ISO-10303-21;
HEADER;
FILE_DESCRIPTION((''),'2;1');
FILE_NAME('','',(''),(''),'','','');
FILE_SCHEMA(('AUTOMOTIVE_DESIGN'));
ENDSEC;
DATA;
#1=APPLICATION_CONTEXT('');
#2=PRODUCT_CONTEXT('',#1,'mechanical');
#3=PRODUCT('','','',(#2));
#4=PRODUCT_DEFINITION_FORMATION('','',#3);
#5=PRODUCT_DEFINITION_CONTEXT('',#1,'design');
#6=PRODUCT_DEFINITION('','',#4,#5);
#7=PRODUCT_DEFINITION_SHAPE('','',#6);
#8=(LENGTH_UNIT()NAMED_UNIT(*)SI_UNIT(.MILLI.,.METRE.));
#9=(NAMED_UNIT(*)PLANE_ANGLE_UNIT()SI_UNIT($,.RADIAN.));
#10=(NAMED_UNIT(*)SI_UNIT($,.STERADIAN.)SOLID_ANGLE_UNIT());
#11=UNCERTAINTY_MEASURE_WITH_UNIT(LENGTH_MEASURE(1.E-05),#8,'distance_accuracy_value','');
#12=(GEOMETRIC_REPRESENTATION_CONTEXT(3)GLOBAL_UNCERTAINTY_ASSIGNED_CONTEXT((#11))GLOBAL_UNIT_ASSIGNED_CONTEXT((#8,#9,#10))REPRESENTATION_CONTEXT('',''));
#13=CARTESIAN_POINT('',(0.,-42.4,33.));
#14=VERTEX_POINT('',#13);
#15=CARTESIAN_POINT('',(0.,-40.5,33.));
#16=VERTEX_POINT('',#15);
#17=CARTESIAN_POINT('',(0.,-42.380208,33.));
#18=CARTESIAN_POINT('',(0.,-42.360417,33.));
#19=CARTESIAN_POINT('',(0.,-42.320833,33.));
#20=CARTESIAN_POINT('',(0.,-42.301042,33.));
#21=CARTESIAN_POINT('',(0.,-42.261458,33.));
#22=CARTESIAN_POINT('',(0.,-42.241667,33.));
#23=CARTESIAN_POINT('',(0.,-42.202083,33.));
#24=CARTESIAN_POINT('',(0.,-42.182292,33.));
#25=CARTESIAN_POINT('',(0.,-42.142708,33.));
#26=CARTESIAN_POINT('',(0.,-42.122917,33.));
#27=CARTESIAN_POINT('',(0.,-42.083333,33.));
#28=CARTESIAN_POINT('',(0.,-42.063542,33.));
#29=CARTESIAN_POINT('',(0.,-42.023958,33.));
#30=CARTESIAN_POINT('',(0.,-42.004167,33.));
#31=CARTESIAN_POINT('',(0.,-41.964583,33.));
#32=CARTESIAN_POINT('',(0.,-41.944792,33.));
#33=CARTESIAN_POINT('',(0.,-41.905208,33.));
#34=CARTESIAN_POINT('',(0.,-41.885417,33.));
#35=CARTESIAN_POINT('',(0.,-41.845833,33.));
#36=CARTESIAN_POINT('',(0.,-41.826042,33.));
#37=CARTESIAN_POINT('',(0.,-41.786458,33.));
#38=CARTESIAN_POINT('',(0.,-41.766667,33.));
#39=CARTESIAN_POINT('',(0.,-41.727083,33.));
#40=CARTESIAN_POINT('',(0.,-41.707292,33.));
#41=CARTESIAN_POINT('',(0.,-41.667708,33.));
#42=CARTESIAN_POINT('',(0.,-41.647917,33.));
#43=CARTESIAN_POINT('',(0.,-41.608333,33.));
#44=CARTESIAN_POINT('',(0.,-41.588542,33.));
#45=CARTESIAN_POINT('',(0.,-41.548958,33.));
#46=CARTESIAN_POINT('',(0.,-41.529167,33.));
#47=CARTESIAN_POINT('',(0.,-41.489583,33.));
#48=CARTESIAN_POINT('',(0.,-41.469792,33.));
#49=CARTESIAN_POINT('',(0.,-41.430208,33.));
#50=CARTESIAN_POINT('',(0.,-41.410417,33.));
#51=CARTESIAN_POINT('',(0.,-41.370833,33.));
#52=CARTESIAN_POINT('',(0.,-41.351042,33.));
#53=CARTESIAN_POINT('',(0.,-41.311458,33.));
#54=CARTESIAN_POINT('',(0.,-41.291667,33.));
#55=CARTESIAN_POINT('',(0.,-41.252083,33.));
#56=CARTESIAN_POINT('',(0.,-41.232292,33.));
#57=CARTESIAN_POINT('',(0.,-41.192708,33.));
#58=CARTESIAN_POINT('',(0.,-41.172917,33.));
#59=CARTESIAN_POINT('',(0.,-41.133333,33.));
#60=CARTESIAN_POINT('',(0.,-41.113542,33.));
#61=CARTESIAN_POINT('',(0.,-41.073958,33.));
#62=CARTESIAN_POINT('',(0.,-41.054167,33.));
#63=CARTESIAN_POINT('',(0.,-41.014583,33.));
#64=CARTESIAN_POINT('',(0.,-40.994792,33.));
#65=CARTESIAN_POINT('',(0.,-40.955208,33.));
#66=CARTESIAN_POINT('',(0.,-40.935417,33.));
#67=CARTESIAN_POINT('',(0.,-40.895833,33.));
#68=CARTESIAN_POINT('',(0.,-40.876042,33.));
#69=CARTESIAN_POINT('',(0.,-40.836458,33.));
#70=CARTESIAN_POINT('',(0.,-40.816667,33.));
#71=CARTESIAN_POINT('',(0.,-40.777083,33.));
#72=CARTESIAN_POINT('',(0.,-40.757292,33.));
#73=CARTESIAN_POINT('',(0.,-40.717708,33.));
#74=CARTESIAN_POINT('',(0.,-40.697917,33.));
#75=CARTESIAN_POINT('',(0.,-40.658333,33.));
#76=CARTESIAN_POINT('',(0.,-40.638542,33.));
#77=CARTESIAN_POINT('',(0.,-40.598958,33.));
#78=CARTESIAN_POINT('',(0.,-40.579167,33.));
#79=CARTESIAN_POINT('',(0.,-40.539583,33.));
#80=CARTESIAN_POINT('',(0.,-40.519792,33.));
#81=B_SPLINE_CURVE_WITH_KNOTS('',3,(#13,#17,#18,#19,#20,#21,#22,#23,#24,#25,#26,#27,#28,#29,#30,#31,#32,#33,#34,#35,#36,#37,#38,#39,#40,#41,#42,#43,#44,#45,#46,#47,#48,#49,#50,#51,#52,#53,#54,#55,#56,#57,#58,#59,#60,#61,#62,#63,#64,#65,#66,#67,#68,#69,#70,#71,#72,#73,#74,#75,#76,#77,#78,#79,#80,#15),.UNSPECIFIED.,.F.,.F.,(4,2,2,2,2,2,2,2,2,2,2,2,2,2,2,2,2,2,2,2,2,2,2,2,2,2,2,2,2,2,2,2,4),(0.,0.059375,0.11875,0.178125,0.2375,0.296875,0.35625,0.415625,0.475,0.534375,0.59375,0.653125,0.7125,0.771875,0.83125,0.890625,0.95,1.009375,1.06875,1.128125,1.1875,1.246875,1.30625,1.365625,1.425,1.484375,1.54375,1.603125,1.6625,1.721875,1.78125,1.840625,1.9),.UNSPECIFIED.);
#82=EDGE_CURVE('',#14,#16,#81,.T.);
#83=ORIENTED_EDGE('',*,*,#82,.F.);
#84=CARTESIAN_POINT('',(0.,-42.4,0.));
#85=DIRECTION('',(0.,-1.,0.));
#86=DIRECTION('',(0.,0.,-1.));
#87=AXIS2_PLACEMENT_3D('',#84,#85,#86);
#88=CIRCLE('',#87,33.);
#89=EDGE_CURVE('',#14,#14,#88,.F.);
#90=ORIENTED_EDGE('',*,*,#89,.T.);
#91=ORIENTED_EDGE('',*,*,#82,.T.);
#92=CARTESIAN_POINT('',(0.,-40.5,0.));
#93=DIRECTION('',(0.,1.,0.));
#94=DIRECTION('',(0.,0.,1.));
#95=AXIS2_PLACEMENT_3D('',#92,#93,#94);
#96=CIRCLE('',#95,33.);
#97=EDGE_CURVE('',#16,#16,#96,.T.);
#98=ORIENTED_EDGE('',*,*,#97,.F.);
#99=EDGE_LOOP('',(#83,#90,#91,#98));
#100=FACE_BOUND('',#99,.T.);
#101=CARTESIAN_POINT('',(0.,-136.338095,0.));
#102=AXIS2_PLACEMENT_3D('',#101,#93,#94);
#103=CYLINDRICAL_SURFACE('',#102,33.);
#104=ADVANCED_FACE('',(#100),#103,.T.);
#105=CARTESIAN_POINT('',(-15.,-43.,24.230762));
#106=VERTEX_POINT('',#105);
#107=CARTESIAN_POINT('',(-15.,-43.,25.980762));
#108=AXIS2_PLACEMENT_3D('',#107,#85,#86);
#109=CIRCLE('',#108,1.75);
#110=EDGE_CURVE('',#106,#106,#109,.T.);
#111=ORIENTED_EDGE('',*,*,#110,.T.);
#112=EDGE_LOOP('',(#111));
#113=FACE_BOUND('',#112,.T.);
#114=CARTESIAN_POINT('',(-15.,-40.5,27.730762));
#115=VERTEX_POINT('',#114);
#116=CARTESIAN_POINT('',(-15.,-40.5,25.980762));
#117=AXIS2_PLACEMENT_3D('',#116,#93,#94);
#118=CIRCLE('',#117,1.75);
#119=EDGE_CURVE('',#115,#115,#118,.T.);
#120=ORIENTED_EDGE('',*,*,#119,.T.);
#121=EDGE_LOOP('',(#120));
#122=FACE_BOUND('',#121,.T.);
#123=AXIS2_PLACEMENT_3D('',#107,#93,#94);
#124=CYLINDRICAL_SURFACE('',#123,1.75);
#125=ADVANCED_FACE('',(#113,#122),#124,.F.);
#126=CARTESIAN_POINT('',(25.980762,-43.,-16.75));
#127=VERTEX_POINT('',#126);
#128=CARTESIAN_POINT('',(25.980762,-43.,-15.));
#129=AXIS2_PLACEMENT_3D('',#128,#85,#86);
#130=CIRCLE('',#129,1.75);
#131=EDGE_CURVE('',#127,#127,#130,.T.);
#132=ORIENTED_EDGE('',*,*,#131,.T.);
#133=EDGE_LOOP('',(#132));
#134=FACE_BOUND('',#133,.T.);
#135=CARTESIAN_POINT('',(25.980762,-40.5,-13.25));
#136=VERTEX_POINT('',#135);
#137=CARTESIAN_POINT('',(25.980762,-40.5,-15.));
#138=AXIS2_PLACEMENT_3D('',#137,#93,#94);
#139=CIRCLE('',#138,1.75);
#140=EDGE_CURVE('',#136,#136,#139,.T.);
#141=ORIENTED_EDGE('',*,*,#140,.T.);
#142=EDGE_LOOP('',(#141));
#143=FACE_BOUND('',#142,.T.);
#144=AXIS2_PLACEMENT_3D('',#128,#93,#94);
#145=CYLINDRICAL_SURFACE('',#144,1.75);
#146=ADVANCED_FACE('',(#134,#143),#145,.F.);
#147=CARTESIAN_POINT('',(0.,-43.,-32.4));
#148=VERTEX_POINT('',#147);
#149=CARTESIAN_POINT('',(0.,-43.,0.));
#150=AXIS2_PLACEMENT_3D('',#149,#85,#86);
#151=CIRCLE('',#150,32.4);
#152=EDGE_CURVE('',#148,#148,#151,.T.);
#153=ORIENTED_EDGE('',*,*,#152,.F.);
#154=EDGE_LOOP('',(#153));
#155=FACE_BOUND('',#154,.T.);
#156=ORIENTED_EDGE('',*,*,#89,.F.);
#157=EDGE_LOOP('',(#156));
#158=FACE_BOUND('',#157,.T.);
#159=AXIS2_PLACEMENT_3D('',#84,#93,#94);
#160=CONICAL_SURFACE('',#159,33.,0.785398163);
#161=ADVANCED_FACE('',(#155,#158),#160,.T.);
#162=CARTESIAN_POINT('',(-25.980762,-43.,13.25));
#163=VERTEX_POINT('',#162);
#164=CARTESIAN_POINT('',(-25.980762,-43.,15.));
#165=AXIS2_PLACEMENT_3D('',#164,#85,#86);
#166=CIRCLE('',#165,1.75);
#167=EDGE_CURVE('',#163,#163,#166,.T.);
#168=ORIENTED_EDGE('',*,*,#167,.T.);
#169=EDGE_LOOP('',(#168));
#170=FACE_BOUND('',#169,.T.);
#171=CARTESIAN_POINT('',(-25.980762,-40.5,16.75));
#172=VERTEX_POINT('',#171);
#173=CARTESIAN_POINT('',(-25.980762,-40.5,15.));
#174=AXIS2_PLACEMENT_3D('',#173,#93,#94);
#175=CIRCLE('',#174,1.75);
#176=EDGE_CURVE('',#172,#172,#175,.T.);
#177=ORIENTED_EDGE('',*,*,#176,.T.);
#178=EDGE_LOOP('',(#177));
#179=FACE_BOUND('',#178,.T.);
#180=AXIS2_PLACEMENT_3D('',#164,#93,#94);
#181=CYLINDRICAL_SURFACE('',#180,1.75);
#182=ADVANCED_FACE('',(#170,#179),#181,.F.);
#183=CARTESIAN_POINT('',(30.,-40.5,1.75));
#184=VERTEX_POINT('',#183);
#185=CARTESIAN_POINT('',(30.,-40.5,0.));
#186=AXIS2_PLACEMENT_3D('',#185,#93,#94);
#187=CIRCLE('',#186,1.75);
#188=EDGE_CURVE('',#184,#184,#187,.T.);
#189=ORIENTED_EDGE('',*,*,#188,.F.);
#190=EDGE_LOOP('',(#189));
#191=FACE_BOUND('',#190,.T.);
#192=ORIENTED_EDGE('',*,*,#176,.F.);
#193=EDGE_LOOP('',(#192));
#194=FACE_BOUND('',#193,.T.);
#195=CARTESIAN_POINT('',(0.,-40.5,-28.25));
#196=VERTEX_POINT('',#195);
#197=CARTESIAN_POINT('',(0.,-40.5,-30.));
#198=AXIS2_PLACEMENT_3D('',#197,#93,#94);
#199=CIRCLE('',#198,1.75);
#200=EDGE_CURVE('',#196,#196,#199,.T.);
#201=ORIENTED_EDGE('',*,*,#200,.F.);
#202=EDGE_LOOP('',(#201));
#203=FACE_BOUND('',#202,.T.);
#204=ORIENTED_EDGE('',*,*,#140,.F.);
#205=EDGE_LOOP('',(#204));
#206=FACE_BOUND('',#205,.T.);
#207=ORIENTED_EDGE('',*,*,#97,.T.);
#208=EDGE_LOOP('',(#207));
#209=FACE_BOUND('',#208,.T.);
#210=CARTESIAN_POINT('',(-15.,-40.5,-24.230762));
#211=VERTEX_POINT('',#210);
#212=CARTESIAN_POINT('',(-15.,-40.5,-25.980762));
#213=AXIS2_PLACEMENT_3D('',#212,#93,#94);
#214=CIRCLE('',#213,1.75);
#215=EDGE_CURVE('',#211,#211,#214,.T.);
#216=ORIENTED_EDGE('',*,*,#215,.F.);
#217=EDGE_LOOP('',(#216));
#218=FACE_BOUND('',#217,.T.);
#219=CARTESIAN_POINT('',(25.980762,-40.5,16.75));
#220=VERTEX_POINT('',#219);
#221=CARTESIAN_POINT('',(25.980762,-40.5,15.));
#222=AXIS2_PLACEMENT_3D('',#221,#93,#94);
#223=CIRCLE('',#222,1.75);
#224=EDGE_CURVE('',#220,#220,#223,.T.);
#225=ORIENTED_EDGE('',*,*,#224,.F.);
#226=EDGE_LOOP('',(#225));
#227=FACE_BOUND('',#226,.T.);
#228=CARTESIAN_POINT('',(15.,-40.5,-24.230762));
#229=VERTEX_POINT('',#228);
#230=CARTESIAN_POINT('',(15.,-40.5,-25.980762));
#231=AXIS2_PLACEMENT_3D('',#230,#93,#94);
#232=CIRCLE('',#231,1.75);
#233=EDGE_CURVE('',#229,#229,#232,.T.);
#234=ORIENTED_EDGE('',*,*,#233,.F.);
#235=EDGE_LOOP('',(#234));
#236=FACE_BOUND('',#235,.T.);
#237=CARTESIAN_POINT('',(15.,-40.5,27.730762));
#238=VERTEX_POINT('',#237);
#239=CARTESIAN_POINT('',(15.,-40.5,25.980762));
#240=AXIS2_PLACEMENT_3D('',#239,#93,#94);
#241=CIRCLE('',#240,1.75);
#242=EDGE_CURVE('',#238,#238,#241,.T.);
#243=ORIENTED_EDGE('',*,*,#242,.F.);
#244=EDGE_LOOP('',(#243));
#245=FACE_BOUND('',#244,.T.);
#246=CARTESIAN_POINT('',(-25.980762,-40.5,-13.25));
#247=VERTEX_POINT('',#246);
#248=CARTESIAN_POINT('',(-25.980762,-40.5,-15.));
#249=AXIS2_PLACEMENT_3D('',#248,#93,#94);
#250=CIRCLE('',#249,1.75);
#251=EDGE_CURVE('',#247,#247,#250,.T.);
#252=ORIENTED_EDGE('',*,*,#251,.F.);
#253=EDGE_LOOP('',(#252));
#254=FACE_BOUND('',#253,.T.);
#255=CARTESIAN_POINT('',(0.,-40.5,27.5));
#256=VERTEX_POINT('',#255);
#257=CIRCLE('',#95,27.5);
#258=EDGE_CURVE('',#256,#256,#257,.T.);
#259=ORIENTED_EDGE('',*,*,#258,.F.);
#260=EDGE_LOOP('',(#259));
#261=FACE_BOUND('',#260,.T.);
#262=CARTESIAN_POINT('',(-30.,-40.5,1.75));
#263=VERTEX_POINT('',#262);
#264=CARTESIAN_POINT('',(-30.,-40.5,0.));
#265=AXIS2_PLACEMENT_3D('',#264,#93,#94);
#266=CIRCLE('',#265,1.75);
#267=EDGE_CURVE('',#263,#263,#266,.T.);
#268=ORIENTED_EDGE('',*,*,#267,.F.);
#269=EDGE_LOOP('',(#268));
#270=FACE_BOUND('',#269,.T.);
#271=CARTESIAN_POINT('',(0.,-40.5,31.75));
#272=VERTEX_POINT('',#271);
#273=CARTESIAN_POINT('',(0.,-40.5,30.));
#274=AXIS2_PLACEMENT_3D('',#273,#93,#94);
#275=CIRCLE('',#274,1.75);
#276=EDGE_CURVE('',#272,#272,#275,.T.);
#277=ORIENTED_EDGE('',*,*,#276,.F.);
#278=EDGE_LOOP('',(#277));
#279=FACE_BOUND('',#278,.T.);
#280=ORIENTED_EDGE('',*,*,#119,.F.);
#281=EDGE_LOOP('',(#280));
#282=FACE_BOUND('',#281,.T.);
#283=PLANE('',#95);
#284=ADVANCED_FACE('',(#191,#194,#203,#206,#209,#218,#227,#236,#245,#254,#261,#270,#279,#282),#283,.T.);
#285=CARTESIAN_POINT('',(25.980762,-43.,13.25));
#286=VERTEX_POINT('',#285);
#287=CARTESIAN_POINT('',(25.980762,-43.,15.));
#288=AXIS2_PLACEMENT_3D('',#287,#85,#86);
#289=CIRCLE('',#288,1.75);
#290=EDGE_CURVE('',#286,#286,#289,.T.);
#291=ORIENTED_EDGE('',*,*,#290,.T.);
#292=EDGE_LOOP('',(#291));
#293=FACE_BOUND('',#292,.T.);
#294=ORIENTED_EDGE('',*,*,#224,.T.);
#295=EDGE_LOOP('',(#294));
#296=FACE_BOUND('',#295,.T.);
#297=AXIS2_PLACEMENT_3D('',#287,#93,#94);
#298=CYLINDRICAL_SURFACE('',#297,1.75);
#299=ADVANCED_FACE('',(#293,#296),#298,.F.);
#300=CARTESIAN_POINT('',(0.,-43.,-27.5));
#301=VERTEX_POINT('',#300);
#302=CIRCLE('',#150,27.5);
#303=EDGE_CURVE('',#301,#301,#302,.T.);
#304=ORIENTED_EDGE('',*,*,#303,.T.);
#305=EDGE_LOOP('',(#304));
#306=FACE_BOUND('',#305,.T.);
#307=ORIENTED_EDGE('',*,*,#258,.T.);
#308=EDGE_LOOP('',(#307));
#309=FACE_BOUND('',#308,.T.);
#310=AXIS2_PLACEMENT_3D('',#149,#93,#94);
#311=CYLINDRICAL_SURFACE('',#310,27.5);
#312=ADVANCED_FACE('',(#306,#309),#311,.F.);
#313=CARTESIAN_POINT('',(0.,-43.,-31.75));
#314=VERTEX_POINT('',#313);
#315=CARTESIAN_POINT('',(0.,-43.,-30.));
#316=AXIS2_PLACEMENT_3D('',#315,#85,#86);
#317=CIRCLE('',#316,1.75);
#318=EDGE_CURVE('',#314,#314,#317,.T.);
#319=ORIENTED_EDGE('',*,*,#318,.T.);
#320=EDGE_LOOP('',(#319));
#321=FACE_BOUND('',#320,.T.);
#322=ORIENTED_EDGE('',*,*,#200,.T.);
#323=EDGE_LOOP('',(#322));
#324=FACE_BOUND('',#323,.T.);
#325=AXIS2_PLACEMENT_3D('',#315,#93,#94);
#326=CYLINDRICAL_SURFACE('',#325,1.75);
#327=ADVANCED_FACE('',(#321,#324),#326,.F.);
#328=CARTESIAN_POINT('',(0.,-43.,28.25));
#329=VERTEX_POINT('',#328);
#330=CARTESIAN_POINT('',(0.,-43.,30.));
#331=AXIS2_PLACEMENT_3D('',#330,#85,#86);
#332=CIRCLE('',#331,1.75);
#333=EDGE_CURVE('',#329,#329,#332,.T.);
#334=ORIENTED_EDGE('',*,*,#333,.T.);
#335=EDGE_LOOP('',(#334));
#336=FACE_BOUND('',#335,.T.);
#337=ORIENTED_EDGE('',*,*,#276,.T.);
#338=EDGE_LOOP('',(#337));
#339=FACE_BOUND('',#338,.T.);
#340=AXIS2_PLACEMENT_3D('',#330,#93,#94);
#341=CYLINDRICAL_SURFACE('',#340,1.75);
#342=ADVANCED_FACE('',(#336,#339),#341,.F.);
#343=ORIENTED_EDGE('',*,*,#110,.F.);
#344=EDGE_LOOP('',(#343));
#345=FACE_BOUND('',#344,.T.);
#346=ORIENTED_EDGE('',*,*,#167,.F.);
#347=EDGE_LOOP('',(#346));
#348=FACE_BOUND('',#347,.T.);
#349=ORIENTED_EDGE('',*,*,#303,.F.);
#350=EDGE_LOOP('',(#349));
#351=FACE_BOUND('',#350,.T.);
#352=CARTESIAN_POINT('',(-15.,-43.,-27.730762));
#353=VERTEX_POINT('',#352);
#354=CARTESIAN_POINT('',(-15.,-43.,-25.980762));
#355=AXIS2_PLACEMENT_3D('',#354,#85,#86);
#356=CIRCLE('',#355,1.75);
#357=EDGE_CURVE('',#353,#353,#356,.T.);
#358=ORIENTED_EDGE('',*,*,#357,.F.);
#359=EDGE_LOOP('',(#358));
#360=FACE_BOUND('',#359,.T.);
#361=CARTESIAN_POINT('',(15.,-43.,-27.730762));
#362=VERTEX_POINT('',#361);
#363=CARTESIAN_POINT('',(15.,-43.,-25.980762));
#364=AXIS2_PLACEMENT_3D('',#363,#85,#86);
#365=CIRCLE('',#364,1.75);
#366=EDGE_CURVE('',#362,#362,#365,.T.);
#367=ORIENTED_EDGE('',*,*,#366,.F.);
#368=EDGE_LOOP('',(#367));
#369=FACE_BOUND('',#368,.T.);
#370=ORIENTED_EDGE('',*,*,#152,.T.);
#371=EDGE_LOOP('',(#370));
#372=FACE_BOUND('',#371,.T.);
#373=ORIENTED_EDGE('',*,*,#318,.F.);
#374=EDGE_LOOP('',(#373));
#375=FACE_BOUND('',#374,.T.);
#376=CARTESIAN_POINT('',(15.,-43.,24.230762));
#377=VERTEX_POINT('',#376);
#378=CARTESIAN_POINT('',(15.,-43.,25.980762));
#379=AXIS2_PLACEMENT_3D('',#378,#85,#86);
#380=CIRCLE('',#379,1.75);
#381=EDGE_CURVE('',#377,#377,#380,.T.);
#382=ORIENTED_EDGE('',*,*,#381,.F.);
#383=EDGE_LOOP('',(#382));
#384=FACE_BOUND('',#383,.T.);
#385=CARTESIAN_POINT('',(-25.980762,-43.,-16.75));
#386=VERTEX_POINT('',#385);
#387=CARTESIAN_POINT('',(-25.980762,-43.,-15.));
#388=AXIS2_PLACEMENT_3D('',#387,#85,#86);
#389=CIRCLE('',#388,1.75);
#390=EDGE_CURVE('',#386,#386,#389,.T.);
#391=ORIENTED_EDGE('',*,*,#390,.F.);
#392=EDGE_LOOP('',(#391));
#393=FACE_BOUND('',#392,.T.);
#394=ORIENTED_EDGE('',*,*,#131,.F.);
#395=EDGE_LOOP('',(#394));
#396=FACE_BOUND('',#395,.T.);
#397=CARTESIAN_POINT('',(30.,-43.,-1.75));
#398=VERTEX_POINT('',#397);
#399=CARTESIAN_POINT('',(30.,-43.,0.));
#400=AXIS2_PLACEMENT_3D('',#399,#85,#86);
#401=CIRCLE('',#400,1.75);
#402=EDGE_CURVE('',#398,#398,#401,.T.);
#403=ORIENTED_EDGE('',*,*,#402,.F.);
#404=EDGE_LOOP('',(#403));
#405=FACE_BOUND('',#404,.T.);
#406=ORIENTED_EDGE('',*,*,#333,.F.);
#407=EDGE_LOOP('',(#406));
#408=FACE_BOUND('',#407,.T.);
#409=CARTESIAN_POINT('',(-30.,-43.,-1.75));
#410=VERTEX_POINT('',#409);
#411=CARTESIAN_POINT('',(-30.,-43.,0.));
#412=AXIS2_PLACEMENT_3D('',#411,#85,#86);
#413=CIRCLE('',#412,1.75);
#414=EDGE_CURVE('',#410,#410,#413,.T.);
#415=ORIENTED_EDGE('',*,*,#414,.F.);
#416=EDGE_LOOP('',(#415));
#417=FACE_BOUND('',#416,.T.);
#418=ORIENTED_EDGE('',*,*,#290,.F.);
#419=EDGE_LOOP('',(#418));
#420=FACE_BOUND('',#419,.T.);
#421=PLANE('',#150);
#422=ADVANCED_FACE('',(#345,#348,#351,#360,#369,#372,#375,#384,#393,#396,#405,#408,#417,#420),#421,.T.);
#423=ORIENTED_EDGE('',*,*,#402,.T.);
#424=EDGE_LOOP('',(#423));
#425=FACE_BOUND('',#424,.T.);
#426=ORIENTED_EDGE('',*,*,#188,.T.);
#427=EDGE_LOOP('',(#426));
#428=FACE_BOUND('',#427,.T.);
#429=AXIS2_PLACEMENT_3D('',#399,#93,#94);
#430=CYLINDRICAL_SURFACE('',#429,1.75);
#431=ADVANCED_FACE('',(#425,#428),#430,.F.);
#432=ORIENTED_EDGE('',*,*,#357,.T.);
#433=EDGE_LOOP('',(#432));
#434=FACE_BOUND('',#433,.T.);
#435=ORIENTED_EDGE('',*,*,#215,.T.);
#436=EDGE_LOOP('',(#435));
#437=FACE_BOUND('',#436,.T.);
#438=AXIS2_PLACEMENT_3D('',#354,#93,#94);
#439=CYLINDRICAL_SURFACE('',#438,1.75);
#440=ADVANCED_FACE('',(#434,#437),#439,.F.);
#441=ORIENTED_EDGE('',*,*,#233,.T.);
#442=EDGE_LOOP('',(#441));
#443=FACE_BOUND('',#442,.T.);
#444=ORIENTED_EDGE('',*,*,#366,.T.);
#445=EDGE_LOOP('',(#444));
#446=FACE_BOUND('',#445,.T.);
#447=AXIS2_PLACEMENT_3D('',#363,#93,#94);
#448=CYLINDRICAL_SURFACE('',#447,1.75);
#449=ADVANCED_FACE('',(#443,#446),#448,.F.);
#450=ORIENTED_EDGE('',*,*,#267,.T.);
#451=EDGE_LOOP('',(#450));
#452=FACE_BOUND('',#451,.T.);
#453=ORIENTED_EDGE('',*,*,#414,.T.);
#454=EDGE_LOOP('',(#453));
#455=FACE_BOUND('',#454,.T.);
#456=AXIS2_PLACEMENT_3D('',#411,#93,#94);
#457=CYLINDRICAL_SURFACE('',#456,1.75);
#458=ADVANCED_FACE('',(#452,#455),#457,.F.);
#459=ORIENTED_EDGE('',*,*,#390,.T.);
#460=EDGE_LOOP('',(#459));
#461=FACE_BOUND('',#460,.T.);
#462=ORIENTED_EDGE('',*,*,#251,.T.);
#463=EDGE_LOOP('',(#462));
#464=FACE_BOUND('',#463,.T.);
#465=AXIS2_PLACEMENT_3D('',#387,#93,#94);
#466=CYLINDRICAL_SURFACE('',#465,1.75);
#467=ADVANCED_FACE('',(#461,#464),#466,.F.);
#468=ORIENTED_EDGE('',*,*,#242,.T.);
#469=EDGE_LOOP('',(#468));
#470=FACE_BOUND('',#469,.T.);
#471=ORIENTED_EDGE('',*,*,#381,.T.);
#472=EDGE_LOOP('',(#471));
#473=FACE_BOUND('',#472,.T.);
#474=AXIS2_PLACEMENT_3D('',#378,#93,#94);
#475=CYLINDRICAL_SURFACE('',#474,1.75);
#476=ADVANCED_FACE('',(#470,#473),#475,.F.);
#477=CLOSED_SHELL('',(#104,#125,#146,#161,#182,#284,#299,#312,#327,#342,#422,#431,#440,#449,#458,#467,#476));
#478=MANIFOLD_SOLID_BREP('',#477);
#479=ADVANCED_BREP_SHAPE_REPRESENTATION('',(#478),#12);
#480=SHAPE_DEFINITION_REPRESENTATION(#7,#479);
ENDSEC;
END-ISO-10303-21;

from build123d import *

# Parameters (mm, degrees)
BASISTEIL_BECHER_1_START       = -43
BASISTEIL_BECHER_1_OUTLINE_R   = 32.5
BASISTEIL_BECHER_1_OUTLINE_R_2 = 1.75
BASISTEIL_BECHER_1_OUTLINE_R_3 = 27.5
BASISTEIL_BECHER_1_DEPTH       = 3
CUT_EXTRUDE1_START             = -0.5
SKETCH1_R                      = 32.5
CUT_EXTRUDE1_DEPTH             = 0.5
BOSS_EXTRUDE1_START            = -2.5
SKETCH3_R                      = 33
SKETCH3_R_2                    = 32.5
BOSS_EXTRUDE1_DEPTH            = 2.5
CHAMFER1_SIZE                  = 0.6


# Read off the part's stored shape, not the designer's step: Basisteil-Becher-1
with BuildPart() as part:
    # Basisteil-Becher-1 outline → Basisteil-Becher-1 (new body)
    with BuildSketch(Plane(origin=(0, 0, 0), x_dir=(1, 0, 0), z_dir=(0, 1, 0)).offset(BASISTEIL_BECHER_1_START)):
        Circle(BASISTEIL_BECHER_1_OUTLINE_R)
        with Locations((-15, -25.980762114)):
            Circle(BASISTEIL_BECHER_1_OUTLINE_R_2, mode=Mode.SUBTRACT)
        with Locations((-25.980762114, -15)):
            Circle(BASISTEIL_BECHER_1_OUTLINE_R_2, mode=Mode.SUBTRACT)
        with Locations((0, -30)):
            Circle(BASISTEIL_BECHER_1_OUTLINE_R_2, mode=Mode.SUBTRACT)
        with Locations((15, -25.980762114)):
            Circle(BASISTEIL_BECHER_1_OUTLINE_R_2, mode=Mode.SUBTRACT)
        with Locations((25.980762114, -15)):
            Circle(BASISTEIL_BECHER_1_OUTLINE_R_2, mode=Mode.SUBTRACT)
        with Locations((-30, 0)):
            Circle(BASISTEIL_BECHER_1_OUTLINE_R_2, mode=Mode.SUBTRACT)
        with Locations((-25.980762114, 15)):
            Circle(BASISTEIL_BECHER_1_OUTLINE_R_2, mode=Mode.SUBTRACT)
        with Locations((-15, 25.980762114)):
            Circle(BASISTEIL_BECHER_1_OUTLINE_R_2, mode=Mode.SUBTRACT)
        Circle(BASISTEIL_BECHER_1_OUTLINE_R_3, mode=Mode.SUBTRACT)
        with Locations((30, 0)):
            Circle(BASISTEIL_BECHER_1_OUTLINE_R_2, mode=Mode.SUBTRACT)
        with Locations((25.980762114, 15)):
            Circle(BASISTEIL_BECHER_1_OUTLINE_R_2, mode=Mode.SUBTRACT)
        with Locations((0, 30)):
            Circle(BASISTEIL_BECHER_1_OUTLINE_R_2, mode=Mode.SUBTRACT)
        with Locations((15, 25.980762114)):
            Circle(BASISTEIL_BECHER_1_OUTLINE_R_2, mode=Mode.SUBTRACT)
    extrude(amount=BASISTEIL_BECHER_1_DEPTH)

    # Sketch1 → Cut-Extrude1 (cut)
    with BuildSketch(Plane(origin=(0, -40, 0), x_dir=(1, 0, 0), z_dir=(0, 1, 0)).offset(CUT_EXTRUDE1_START)):
        with Locations(Location((0, 0, 0), (0, 0, 270))):
            Circle(SKETCH1_R)
    extrude(amount=CUT_EXTRUDE1_DEPTH, mode=Mode.SUBTRACT)

    # Sketch3 → Boss-Extrude1 (add)
    with BuildSketch(Plane(origin=(0, -40.5, 0), x_dir=(1, 0, 0), z_dir=(0, 1, 0)).offset(BOSS_EXTRUDE1_START)):
        with Locations(Location((0, 0, 0), (0, 0, 270))):
            Circle(SKETCH3_R)
        Circle(SKETCH3_R_2, mode=Mode.SUBTRACT)
    extrude(amount=BOSS_EXTRUDE1_DEPTH)

    # Chamfer1
    chamfer1_edges = [part.edges().sort_by_distance(p)[0] for p in [
        (0, -43, -33),
    ]]
    chamfer(chamfer1_edges, length=CHAMFER1_SIZE)


solid = part.part
